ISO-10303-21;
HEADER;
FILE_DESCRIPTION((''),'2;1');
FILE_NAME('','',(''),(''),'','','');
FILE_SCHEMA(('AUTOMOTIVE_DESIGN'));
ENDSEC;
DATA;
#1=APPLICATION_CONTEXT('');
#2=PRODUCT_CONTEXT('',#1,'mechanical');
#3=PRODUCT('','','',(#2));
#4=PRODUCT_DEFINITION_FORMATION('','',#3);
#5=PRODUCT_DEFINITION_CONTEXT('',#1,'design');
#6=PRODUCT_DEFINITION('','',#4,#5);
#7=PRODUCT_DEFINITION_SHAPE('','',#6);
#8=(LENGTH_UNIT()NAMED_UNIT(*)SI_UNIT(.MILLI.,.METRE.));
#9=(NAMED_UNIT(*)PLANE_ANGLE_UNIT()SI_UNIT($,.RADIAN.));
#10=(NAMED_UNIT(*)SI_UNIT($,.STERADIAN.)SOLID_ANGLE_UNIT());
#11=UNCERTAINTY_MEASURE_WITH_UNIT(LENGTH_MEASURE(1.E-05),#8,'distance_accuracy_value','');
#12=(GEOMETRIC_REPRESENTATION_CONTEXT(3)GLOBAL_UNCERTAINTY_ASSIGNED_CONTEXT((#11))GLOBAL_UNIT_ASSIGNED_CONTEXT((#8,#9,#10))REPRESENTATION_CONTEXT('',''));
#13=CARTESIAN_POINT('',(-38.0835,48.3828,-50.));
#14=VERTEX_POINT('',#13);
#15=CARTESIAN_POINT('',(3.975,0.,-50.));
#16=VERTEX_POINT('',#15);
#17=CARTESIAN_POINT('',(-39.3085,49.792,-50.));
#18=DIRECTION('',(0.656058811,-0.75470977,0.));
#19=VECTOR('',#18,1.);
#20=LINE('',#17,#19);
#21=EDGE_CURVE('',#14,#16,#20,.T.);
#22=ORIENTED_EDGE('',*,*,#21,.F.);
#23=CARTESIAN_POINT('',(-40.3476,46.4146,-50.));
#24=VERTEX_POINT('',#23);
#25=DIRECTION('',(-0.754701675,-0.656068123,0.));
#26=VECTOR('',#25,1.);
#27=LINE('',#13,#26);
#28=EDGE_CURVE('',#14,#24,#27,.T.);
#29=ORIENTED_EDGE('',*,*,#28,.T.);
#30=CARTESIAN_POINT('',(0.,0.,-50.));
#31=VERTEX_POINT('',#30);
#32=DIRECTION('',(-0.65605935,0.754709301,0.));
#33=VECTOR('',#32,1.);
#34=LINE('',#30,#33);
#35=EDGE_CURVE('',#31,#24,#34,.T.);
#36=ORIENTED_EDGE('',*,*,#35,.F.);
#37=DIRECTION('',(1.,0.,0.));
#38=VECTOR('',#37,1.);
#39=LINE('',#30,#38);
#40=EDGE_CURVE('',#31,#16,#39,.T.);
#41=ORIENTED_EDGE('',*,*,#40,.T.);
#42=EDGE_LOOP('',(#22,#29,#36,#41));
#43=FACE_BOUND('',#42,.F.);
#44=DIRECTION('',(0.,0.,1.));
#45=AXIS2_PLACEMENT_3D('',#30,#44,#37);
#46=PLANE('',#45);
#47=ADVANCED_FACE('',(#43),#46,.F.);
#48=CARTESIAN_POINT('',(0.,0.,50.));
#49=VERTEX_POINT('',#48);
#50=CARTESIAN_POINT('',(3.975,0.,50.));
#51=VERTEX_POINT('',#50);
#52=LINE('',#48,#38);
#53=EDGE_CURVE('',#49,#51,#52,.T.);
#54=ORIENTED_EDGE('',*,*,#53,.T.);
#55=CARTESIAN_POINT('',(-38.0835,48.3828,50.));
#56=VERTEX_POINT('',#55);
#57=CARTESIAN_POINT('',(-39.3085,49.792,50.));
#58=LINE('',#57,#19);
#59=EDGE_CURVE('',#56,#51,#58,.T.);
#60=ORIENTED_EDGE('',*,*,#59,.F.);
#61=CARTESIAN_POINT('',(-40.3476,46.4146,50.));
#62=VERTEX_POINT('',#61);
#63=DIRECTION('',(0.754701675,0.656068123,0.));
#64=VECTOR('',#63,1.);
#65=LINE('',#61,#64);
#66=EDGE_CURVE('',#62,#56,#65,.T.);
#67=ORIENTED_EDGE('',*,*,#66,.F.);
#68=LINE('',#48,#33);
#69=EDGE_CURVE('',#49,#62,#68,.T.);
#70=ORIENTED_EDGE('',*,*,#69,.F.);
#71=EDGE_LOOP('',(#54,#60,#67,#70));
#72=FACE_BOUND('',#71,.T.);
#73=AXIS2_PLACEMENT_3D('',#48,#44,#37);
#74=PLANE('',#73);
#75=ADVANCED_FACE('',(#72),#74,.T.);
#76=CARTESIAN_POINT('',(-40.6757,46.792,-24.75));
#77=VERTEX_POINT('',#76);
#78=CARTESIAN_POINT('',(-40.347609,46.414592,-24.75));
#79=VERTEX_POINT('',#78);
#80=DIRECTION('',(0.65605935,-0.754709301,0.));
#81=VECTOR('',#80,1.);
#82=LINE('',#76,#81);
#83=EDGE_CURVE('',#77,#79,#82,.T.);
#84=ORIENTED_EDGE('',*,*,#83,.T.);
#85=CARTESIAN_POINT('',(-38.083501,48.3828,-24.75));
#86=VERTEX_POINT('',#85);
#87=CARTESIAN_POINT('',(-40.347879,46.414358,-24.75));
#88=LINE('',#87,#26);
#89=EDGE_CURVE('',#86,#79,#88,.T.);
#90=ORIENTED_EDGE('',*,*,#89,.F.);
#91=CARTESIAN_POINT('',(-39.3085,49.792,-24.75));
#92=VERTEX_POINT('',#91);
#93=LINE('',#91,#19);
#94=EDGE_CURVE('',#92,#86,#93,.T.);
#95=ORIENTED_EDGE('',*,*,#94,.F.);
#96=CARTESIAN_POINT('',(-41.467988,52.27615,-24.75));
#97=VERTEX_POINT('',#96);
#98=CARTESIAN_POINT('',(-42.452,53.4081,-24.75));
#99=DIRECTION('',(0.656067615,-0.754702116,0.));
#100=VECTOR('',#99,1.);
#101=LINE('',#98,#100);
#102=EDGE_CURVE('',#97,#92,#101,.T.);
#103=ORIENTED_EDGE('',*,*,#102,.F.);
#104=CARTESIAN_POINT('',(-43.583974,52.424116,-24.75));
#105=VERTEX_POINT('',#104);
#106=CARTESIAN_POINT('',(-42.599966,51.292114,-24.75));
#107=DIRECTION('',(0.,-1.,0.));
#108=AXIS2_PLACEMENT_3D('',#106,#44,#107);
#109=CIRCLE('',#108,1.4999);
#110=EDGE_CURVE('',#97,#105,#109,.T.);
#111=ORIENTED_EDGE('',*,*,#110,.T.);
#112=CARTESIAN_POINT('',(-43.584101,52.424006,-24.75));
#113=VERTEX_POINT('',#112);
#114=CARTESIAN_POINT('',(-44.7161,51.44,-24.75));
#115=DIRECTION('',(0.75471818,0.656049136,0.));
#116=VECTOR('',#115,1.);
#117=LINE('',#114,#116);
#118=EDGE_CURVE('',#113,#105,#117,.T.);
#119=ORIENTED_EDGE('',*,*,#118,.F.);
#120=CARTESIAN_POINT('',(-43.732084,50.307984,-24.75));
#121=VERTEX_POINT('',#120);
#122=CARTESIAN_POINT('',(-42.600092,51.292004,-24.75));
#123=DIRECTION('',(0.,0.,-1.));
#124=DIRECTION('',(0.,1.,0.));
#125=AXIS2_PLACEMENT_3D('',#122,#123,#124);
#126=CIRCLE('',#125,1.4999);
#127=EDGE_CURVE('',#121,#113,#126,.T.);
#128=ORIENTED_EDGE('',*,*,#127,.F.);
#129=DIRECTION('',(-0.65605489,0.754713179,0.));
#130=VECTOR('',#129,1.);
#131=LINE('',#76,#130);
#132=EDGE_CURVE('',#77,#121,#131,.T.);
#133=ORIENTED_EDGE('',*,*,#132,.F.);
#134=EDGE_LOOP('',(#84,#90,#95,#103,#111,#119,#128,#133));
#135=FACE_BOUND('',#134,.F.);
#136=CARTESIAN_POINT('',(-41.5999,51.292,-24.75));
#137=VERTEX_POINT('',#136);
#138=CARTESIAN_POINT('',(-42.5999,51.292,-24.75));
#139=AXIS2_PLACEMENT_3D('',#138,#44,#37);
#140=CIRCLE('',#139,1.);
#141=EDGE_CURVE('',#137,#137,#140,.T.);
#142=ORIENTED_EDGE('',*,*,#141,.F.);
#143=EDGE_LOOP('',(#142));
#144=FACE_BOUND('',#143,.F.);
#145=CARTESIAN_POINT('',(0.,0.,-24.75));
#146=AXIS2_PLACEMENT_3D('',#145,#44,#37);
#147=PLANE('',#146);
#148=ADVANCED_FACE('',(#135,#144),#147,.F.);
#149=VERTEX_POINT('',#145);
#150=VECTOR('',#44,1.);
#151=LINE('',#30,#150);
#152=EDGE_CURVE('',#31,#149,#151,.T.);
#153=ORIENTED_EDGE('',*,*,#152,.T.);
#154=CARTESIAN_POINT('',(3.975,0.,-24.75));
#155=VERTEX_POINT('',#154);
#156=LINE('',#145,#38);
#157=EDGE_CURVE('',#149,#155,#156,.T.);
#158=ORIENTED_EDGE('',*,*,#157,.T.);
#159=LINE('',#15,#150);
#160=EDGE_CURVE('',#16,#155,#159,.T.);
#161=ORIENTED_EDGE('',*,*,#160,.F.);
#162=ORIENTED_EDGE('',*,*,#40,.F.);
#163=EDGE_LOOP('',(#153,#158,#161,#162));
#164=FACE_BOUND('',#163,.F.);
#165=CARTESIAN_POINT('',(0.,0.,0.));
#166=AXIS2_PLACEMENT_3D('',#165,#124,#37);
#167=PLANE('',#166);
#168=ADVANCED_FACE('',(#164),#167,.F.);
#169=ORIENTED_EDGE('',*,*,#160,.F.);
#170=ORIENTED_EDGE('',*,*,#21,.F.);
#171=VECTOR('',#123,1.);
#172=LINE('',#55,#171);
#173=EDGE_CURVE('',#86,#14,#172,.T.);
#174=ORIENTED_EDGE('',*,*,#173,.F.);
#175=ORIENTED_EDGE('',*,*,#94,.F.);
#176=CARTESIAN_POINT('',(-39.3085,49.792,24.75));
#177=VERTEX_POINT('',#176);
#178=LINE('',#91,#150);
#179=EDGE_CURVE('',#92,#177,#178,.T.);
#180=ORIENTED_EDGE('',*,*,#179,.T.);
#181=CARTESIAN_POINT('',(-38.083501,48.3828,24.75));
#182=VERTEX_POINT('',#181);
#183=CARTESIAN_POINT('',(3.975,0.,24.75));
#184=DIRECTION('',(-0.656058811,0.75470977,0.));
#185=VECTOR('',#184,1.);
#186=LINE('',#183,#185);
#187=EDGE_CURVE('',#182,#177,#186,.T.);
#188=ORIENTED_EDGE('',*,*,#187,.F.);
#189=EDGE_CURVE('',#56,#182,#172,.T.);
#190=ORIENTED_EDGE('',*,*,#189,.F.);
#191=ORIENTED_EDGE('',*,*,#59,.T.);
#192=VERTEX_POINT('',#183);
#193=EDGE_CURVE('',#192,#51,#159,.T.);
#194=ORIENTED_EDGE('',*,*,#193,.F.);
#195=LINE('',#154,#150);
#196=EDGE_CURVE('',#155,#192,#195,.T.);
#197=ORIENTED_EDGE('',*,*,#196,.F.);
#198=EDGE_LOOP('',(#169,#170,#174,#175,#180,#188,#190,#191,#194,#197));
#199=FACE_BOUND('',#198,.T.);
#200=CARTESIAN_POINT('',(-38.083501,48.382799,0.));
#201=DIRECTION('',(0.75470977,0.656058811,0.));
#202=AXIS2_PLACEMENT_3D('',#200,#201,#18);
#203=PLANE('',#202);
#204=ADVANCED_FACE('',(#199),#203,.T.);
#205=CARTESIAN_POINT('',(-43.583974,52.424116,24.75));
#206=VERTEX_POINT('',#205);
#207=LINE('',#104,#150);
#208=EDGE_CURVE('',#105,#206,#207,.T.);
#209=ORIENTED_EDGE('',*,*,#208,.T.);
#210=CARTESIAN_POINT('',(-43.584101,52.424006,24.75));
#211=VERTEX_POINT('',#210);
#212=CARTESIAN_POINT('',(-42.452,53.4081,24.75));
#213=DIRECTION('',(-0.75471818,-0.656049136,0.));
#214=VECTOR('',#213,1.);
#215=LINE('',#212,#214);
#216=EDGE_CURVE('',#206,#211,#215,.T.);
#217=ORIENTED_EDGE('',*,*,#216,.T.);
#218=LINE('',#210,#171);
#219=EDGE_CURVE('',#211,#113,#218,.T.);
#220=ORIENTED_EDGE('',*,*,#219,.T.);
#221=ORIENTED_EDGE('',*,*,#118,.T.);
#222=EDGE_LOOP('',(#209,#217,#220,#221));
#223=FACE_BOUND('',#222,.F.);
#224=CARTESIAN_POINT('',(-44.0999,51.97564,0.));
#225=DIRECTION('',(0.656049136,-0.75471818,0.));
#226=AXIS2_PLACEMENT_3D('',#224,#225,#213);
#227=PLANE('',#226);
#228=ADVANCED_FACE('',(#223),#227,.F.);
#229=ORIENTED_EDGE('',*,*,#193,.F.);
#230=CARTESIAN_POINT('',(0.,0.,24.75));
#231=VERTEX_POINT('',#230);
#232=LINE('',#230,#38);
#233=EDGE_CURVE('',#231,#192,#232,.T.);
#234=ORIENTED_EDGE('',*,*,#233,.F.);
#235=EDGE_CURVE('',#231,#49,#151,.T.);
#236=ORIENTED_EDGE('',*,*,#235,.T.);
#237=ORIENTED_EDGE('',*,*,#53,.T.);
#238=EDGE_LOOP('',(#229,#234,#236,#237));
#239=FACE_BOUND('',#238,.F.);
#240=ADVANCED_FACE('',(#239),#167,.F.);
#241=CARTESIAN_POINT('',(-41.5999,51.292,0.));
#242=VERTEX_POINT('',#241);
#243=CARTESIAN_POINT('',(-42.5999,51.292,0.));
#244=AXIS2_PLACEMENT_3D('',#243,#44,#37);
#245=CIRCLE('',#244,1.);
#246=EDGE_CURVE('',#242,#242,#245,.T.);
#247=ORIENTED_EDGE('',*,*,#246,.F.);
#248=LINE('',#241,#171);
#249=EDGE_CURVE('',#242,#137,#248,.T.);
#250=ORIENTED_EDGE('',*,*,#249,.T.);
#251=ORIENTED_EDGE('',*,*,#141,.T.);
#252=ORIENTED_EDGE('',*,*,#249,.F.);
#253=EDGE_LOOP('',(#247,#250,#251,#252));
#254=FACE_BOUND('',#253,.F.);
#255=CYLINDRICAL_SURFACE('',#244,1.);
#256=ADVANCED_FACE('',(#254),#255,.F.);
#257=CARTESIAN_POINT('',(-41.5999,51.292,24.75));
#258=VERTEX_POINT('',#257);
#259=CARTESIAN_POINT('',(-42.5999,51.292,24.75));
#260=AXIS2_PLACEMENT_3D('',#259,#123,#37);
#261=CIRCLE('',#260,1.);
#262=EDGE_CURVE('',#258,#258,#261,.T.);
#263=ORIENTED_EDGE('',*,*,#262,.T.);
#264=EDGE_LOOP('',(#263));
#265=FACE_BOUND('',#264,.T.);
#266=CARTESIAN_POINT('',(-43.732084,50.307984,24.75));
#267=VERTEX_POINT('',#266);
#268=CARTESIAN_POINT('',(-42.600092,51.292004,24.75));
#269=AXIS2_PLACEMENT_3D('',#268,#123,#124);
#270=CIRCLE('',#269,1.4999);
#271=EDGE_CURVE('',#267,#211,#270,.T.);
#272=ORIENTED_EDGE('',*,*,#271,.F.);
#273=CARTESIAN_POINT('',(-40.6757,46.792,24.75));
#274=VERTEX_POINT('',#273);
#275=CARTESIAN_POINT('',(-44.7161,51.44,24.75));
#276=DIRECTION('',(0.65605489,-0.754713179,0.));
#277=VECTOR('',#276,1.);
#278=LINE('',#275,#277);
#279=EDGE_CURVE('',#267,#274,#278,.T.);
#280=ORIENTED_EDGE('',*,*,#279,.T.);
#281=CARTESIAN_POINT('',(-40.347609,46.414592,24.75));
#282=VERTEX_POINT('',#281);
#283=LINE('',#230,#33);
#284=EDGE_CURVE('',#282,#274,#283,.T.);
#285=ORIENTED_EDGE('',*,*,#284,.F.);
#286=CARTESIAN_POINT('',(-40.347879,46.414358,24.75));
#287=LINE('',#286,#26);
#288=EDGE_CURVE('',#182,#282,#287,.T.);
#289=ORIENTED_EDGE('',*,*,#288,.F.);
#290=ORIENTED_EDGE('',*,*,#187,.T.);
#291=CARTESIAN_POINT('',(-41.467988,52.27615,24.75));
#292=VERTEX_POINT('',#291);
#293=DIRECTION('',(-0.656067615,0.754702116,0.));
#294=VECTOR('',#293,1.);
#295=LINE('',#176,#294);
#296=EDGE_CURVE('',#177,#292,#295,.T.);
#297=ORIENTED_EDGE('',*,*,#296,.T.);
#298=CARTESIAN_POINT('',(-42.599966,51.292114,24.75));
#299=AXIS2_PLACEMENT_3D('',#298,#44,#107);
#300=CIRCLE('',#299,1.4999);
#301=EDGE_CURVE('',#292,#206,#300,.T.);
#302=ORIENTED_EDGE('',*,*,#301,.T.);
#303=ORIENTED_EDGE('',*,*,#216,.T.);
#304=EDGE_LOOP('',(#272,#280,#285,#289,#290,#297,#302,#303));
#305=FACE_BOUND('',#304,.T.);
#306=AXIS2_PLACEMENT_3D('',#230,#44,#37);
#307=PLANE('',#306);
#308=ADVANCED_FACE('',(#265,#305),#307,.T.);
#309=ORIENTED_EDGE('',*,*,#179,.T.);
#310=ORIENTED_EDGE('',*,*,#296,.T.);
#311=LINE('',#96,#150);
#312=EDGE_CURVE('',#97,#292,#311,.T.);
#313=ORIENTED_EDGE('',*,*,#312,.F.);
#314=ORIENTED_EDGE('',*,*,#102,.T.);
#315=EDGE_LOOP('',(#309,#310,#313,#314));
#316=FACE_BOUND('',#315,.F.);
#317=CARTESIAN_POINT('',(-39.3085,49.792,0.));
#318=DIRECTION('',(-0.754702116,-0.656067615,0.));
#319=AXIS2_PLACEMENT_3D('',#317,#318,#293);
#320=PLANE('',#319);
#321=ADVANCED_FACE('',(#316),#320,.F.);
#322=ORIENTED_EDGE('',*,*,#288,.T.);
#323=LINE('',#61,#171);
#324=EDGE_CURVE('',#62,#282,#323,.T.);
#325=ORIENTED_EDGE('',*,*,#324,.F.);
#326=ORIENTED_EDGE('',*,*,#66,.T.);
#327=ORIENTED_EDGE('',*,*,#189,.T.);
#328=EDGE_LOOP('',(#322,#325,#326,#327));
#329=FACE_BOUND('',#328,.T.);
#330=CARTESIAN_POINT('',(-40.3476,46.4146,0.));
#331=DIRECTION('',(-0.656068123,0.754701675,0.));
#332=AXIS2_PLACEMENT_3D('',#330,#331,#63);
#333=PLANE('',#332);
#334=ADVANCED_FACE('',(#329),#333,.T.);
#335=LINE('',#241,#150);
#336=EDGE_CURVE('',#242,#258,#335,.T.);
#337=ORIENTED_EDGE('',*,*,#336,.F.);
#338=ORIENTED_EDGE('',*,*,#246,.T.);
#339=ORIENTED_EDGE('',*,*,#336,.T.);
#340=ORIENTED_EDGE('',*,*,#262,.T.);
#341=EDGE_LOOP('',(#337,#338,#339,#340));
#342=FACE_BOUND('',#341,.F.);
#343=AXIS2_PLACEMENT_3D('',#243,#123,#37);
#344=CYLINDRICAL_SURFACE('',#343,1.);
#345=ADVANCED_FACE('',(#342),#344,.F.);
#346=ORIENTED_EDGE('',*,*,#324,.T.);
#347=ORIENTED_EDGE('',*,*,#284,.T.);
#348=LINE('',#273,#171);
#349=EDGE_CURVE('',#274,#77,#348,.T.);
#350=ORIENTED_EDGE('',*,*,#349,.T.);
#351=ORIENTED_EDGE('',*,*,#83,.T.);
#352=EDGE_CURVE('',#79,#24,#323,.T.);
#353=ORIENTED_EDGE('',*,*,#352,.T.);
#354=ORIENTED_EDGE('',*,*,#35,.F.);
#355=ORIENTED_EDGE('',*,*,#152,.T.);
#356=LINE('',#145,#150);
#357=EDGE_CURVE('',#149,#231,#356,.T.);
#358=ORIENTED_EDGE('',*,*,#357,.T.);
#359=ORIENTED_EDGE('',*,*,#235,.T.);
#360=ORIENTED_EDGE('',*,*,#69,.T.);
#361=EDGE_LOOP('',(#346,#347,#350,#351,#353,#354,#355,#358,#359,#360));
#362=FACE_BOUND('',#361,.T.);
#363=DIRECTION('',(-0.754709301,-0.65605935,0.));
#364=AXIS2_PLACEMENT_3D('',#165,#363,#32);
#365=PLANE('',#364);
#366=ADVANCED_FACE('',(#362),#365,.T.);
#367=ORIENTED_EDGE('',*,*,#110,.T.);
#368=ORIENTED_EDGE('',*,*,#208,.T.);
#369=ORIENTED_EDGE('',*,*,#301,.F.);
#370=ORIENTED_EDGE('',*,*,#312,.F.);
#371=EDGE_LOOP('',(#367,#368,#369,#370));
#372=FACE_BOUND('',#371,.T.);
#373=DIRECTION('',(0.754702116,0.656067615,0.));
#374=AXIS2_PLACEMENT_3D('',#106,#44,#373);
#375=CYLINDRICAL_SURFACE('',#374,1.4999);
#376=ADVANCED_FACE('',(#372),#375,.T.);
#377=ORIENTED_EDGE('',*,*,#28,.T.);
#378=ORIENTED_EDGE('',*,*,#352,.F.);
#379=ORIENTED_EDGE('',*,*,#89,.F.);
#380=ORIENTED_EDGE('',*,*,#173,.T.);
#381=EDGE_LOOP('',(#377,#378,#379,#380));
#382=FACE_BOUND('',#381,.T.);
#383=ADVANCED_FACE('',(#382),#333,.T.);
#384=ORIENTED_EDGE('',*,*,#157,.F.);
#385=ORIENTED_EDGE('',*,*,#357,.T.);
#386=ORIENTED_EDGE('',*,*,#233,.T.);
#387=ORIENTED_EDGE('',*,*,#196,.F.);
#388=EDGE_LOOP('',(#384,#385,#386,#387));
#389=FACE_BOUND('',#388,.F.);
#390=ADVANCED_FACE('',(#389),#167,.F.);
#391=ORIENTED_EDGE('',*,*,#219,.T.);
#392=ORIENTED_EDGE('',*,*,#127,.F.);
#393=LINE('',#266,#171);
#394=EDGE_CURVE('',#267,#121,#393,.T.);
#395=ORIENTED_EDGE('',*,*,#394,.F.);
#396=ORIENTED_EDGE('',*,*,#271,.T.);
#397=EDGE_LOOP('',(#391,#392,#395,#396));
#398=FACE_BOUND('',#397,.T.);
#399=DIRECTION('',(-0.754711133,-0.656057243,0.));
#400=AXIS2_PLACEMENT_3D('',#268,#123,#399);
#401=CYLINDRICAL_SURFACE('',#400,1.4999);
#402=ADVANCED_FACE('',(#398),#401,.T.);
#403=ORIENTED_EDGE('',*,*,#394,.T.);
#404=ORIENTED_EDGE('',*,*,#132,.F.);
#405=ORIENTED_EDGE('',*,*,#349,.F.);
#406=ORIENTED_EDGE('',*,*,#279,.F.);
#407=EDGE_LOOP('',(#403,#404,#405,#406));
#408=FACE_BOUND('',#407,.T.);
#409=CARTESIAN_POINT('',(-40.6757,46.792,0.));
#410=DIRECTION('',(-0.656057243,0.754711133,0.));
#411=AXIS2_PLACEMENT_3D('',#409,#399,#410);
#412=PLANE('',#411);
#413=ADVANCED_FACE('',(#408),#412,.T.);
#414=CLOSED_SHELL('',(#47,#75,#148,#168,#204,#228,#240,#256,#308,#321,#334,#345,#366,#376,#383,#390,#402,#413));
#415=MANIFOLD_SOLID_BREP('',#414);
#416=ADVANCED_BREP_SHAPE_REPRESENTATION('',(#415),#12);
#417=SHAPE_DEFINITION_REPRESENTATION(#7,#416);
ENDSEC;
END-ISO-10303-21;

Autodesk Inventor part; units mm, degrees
ref_plane "YZ Plane" through (0, 0, 0) normal (1, 0, 0) x (0, 1, 0)
ref_plane "XZ Plane" through (0, 0, 0) normal (0, 1, 0) x (-1, 0, 0)
ref_plane "XY Plane" through (0, 0, 0) normal (0, 0, 1) x (1, 0, 0)
sketch "Эскиз1" plane through (0, 0, 0) normal (0, 0, 1) x (1, 0, 0)
  line L0 (0, 0) -> (-40.6757, 46.792)
  line L1 (-40.6757, 46.792) -> (-85.6757, 46.792)
  line L2 (-85.6757, 49.792) -> (-39.3085, 49.792)
  line L3 (-39.3085, 49.792) -> (3.975, 0)
  line L4 (-40.6757, 46.792) -> (-55.8266, 64.2212)
  line L5 (0, 0) -> (15.6604, 0)
  line L6 (-15.0802, 19.6341) -> (-42.5999, 51.292)
  line L7 (-85.6757, 51.292) -> (-42.5999, 51.292)
  circle A0 centre (-42.5999, 51.292) radius 1
  line L8 (-39.3085, 49.792) -> (-42.452, 53.4081)
  line L9 (-42.452, 53.4081) -> (-44.7161, 51.44)
  line L10 (-40.6757, 46.792) -> (-40.6757, 52.792)
  line L11 (-40.6757, 52.792) -> (-44.0999, 52.792)
  line L12 (-44.0999, 52.792) -> (-44.0999, 46.792)
  line L13 (-40.6757, 46.792) -> (-38.4115, 48.7602)
  line L14 (-40.3476, 46.4146) -> (-38.0835, 48.3828)
  point P0 (-59.7086, 51.292)
  dimension "d0" = 131
  dimension "d1" = 45
  dimension "d2" = 62
  dimension "d3" = 3
  dimension "d4" = 3
  dimension "d5" = 3
  dimension "d6" = 3
  dimension "d7" = 2
  dimension "d8" = 1.5
  dimension "d9" = 1.5
  dimension "d10" = 1.5
  dimension "d17" = 0.5
extrude "Выдавливание1" add sketch "Эскиз1" along normal mid plane 49.5 contours L0 L14 L3 L5 | L0 L13 L6 L14 | L4 L2 L6 L10 | L10 L6 L13 | L6 L13 L3 L14 | L4 L12 L7 A0 L6 L2 | L10 L2 L3 L13 L6 | L6 L2 L10 | L6 A0 L7 L12 L9 L11 L8 L10 L2 | L4 L7 L12 | L10 L8 L2 | L4 L9 L12 L7 | L11 L9 L8
fillet "Сопряжение1" radius 1.5 2 edges at (-42.452, 53.4081, 0) (-44.7161, 51.44, 0)
extrude "Выдавливание2" add sketch "Эскиз1" along normal mid plane 100 contours L0 L14 L3 L5
properties part number "Cover2"
